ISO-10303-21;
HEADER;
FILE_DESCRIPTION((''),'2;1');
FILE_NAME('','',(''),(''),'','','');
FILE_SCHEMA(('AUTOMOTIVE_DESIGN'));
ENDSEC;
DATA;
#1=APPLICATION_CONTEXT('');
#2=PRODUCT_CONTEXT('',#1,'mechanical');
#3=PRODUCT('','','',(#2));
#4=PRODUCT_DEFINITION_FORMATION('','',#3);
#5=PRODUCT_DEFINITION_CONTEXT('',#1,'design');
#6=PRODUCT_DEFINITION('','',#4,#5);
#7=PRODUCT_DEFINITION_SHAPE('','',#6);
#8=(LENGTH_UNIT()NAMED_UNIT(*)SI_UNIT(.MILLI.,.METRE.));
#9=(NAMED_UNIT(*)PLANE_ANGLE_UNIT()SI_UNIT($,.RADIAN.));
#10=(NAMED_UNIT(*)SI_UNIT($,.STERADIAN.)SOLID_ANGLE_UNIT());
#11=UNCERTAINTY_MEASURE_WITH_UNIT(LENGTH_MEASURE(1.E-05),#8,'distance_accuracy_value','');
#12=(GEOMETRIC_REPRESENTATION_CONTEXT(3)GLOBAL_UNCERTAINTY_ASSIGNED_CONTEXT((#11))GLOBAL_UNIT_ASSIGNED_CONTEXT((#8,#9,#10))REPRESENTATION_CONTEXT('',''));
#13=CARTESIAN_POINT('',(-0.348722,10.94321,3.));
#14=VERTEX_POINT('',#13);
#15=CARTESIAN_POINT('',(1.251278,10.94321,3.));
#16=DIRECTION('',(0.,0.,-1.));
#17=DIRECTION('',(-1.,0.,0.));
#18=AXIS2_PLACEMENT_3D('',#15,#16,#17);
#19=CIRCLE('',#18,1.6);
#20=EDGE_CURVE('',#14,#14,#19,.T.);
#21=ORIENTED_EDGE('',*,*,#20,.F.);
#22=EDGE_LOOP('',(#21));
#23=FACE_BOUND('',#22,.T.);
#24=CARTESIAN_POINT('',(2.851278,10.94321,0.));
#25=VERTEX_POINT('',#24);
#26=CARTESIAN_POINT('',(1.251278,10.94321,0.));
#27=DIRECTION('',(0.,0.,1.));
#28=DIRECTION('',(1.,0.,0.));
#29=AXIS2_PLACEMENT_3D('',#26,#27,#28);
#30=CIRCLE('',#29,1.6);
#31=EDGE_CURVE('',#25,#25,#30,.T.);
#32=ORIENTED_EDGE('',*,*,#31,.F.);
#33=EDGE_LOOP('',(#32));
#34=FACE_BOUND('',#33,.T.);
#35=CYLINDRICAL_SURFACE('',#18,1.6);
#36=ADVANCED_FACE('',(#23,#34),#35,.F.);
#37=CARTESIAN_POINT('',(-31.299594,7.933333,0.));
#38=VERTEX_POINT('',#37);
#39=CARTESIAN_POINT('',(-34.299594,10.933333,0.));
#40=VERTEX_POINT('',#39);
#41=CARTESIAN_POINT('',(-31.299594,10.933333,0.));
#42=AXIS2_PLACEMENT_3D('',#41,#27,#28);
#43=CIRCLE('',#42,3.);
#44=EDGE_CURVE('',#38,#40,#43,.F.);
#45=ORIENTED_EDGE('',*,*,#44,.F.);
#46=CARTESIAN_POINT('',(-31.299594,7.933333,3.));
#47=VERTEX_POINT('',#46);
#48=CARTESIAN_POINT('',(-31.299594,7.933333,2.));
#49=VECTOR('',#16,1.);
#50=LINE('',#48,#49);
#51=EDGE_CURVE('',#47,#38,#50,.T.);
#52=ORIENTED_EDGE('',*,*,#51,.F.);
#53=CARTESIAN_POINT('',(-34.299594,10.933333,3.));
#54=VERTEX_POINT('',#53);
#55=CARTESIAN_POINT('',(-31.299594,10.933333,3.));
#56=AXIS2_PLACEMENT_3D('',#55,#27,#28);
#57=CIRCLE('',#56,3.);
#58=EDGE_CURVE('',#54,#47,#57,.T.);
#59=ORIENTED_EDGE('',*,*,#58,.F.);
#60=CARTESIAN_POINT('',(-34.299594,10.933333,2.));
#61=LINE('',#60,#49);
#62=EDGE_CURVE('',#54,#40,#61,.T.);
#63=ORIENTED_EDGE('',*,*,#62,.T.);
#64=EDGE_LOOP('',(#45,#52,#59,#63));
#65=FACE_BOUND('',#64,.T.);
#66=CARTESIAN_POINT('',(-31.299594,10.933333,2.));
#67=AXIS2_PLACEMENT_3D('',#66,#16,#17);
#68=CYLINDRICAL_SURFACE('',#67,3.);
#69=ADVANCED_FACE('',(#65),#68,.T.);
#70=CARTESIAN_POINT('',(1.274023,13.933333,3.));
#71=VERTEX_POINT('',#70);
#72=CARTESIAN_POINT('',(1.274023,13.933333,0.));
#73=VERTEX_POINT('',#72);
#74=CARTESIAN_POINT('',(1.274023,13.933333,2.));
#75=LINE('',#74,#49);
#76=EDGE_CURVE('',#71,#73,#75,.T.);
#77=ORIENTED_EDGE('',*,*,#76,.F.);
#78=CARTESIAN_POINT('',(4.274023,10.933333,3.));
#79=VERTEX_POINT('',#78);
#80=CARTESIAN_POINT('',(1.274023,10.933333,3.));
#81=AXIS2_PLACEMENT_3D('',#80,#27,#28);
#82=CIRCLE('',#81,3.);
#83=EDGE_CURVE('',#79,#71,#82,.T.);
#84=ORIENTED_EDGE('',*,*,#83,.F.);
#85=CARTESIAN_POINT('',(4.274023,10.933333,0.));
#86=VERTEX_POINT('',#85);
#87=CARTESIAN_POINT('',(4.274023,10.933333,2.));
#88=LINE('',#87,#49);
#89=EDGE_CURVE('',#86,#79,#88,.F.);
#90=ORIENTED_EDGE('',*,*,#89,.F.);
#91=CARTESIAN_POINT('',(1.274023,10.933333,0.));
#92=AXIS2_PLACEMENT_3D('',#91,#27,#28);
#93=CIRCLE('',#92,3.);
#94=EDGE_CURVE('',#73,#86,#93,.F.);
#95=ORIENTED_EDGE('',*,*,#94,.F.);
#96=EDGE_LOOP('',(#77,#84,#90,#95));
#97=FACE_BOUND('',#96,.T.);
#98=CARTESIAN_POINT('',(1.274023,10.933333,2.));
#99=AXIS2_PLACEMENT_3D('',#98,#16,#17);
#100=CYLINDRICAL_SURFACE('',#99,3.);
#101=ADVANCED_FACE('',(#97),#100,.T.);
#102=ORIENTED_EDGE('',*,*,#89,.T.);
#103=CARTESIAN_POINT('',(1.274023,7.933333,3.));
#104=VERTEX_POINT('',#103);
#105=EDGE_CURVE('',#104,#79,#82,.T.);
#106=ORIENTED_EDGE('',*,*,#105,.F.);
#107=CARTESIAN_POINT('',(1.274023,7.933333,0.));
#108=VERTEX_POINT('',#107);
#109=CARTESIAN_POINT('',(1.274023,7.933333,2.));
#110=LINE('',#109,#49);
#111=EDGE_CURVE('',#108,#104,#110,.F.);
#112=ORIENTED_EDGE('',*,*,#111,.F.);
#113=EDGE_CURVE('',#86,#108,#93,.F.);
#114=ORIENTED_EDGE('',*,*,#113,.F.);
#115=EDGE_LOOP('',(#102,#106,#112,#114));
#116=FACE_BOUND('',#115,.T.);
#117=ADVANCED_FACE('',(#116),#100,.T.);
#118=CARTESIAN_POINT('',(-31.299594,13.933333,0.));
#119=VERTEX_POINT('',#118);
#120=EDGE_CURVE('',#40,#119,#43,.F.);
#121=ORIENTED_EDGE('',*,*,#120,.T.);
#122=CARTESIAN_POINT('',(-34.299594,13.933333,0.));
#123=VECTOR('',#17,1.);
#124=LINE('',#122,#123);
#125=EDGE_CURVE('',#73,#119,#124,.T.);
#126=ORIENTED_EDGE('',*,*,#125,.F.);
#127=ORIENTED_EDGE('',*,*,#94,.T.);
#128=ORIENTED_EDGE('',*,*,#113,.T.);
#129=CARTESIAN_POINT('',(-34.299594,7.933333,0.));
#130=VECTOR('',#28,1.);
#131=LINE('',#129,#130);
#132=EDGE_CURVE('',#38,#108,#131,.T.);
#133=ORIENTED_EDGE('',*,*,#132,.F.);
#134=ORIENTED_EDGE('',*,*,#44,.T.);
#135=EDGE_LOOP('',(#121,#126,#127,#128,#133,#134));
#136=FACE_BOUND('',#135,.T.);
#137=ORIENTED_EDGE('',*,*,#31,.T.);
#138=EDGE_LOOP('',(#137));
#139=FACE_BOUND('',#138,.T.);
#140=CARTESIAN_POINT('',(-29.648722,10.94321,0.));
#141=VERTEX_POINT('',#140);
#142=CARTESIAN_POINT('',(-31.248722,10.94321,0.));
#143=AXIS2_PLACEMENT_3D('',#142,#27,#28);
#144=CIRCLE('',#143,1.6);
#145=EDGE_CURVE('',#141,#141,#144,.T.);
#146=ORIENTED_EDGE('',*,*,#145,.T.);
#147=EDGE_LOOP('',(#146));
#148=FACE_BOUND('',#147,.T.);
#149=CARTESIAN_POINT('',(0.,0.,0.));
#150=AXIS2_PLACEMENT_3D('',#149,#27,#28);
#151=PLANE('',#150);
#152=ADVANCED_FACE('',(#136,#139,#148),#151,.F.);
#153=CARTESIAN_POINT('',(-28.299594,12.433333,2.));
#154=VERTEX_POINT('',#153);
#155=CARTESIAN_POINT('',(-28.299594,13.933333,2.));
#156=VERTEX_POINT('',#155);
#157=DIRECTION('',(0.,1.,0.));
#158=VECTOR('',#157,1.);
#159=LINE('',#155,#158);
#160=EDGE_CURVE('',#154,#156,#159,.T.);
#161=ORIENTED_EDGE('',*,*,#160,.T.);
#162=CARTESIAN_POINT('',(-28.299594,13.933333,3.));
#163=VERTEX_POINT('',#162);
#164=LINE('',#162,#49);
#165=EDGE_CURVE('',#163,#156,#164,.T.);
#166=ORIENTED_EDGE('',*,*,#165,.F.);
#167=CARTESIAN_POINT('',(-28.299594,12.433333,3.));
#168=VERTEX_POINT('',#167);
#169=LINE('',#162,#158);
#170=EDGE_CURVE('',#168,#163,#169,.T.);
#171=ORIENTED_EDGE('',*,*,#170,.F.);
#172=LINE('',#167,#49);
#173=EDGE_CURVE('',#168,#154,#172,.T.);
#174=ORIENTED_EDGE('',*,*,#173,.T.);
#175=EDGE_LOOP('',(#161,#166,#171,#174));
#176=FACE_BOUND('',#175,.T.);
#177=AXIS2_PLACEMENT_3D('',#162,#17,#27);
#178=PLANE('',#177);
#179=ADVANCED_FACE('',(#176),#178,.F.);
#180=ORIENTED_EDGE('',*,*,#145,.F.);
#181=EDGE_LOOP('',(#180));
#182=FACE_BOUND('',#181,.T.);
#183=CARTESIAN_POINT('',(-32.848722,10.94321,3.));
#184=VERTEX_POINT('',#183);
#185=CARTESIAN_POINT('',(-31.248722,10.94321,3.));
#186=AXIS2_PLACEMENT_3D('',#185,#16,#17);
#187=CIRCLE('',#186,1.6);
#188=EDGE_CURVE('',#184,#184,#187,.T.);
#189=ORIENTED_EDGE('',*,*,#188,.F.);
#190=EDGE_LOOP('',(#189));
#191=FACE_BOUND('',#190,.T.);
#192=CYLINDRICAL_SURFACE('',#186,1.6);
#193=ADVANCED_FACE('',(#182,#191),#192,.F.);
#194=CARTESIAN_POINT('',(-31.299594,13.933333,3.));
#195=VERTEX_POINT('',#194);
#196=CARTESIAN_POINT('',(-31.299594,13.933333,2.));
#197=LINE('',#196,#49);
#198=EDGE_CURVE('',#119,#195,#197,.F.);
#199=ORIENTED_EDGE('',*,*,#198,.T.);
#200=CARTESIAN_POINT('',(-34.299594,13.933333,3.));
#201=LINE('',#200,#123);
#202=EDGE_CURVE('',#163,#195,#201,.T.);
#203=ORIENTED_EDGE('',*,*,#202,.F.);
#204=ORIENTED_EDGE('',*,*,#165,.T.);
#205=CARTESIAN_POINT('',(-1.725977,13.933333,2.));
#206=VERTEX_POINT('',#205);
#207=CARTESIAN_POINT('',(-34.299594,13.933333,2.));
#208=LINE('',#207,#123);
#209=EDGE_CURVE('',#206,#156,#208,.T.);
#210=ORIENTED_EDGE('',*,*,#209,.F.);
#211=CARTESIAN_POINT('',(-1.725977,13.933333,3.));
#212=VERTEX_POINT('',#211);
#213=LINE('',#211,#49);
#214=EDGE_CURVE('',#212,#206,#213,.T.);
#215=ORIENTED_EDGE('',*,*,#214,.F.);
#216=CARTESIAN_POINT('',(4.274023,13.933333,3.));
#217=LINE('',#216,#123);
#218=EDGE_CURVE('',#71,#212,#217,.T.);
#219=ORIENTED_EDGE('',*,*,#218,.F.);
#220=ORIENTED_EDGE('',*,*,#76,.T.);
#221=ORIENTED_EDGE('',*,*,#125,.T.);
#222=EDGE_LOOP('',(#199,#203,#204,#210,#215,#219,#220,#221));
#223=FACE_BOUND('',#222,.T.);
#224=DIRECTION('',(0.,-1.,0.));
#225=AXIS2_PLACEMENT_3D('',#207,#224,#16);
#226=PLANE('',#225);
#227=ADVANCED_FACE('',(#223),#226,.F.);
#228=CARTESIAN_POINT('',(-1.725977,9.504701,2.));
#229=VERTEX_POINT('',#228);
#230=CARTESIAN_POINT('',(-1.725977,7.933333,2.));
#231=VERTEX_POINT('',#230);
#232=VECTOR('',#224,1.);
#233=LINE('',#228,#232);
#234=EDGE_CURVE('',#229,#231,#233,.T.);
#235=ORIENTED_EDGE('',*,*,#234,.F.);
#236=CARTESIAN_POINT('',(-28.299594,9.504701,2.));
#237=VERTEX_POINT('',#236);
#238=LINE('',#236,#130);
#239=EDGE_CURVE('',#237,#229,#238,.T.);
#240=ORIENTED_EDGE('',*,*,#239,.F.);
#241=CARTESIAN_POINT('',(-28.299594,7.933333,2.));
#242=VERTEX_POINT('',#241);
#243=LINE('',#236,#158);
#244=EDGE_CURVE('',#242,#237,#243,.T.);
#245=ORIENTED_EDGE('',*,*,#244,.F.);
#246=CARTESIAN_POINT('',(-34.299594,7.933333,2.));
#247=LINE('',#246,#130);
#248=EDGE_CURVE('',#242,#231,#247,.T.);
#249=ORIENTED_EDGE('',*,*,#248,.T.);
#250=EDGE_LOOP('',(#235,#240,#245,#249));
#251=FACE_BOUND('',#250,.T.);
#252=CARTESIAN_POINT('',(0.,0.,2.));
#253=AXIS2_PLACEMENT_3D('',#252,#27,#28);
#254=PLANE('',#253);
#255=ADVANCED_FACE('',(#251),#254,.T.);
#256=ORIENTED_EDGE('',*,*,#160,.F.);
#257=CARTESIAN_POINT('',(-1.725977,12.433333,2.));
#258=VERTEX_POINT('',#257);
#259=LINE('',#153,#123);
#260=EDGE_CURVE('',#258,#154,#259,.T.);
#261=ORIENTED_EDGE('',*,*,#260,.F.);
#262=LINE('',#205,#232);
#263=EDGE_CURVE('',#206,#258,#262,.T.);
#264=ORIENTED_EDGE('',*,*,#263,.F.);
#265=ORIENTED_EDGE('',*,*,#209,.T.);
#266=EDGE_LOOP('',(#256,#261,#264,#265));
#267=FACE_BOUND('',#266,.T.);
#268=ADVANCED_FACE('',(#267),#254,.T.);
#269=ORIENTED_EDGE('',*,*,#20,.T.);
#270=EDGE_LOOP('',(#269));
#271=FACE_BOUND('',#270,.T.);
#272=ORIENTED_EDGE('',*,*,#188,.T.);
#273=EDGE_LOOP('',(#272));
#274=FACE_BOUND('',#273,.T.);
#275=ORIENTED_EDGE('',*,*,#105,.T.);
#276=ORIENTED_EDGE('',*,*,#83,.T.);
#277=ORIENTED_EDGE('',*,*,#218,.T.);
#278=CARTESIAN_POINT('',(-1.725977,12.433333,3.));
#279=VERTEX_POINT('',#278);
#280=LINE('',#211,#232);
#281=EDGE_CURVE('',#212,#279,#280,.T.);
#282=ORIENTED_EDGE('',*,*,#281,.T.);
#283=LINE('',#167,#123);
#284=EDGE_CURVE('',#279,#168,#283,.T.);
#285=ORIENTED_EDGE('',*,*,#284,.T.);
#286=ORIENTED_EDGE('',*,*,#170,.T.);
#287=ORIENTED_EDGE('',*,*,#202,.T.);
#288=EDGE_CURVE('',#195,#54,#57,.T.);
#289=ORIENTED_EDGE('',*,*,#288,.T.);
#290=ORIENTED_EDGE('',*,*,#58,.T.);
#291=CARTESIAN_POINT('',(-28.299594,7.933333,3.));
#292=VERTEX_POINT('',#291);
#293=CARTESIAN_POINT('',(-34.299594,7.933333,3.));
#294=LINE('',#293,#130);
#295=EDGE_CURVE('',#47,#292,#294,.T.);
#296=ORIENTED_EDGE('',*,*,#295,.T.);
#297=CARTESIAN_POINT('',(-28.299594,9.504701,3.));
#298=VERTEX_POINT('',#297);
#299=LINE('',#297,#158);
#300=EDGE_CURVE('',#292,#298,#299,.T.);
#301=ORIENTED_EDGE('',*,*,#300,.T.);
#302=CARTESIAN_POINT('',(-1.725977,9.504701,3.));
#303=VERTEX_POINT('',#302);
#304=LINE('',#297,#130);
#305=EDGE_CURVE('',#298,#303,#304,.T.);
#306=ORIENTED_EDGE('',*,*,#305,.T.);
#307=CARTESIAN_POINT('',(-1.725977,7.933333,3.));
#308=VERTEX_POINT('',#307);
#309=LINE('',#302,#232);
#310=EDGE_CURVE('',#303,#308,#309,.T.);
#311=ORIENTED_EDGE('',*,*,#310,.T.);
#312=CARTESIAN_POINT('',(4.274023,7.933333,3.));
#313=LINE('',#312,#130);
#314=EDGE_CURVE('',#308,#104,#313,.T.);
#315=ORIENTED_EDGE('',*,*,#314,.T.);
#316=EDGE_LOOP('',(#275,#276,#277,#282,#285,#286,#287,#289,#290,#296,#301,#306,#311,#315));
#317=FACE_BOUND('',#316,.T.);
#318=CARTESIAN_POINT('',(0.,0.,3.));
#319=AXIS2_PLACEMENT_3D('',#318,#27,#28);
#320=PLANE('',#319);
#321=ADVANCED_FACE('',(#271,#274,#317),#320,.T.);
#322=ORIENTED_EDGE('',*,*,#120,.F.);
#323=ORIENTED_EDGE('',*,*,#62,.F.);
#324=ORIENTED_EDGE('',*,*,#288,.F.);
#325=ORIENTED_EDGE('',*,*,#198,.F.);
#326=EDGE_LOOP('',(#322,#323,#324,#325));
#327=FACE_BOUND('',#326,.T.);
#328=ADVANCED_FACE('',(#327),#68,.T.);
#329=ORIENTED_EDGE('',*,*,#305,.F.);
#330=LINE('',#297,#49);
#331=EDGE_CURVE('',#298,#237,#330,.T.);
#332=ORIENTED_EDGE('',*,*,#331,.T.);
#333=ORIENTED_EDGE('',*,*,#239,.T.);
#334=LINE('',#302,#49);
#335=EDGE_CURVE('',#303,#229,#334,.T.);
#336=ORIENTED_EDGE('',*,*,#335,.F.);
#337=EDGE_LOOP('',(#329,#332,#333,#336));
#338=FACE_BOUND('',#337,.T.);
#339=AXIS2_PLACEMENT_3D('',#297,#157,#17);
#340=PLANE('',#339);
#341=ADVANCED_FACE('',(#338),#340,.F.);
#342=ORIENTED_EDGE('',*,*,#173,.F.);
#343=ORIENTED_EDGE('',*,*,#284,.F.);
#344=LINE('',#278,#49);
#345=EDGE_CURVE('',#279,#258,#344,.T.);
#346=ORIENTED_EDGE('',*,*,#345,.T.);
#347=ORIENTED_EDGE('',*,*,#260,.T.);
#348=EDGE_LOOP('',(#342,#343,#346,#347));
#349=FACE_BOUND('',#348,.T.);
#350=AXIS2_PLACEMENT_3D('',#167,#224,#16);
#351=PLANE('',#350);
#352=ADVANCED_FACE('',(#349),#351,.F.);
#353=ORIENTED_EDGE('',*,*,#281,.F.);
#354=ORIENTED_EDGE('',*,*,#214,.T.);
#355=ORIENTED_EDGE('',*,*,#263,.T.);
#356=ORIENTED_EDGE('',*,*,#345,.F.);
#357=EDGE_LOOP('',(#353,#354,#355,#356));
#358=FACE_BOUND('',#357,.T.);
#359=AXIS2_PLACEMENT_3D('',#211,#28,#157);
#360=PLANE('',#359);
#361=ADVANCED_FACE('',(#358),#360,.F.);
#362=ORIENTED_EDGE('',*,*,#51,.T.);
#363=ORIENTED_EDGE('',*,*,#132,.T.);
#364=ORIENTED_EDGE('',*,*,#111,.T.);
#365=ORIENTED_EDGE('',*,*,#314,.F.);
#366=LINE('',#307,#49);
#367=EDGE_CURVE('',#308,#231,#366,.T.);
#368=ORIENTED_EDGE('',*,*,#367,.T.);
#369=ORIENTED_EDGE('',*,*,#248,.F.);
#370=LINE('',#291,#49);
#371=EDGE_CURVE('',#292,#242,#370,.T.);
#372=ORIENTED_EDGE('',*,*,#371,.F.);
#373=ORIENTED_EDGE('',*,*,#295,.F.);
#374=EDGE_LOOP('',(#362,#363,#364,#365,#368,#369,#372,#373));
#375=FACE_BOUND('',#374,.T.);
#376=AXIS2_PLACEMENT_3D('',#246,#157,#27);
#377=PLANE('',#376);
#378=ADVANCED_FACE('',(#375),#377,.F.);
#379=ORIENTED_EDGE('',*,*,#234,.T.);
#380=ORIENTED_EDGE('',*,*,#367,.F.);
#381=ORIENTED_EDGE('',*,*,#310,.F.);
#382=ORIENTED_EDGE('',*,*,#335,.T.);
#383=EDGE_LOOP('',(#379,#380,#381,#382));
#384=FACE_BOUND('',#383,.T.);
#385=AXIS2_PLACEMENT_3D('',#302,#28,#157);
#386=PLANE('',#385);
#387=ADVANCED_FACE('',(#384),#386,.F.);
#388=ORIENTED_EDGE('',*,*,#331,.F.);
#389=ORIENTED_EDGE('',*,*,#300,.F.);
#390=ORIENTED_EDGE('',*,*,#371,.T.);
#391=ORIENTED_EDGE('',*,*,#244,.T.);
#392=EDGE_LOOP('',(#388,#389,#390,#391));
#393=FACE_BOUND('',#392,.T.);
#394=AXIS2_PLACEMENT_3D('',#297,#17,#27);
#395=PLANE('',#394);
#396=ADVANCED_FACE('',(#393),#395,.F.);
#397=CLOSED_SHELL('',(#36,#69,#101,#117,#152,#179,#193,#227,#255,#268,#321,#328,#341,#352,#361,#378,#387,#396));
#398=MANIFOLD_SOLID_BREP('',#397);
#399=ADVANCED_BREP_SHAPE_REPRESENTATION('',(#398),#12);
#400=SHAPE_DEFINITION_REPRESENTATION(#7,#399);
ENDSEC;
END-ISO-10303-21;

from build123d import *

# Parameters (mm, degrees)
SZKIC1_W                        = 38.573617051
SZKIC1_H                        = 6
DODANIE_WYCI_GNI_CIE1_DEPTH     = 2
WYTNIJ_WYCI_GNI_CIE2_DEPTH      = 1
WYTNIJ_WYCI_GNI_CIE2_DEPTH_BACK = 38.075597401
SZKIC3_R                        = 1.6
DODANIE_WYCI_GNI_CIE2_DEPTH     = 1
SZKIC5_R                        = 1.6
WYTNIJ_WYCI_GNI_CIE3_DEPTH      = 38.142965991
ZAOKR_GLENIE1_R                 = 3


with BuildPart() as part:
    # Szkic1 → Dodanie-wyciągnięcie1 (new body)
    with BuildSketch(Plane.XY):
        with Locations((-15.012785421, 10.933333333)):
            Rectangle(SZKIC1_W, SZKIC1_H)
    extrude(amount=DODANIE_WYCI_GNI_CIE1_DEPTH)

    # Szkic3 → Wytnij-wyciągnięcie2 (cut, two sides: drawn at the far end of the back side and taken through both)
    with BuildSketch(Plane.XY.offset(2).offset(-WYTNIJ_WYCI_GNI_CIE2_DEPTH_BACK)):
        with Locations((-31.24872203, 10.943210033)):
            Circle(SZKIC3_R)
        with Locations((1.25127797, 10.943210033)):
            Circle(SZKIC3_R)
    extrude(amount=WYTNIJ_WYCI_GNI_CIE2_DEPTH + WYTNIJ_WYCI_GNI_CIE2_DEPTH_BACK, mode=Mode.SUBTRACT)

    # Szkic4 → Dodanie-wyciągnięcie2 (add)
    with BuildSketch(Plane.XY.offset(2)):
        Polygon((-34.299593946, 13.933333333), (-28.299593946, 13.933333333), (-28.299593946, 12.433333333), (-1.725976895, 12.433333333), (-1.725976895, 13.933333333), (4.274023105, 13.933333333), (4.274023105, 7.933333333), (-1.725976895, 7.933333333), (-1.725976895, 9.504700568), (-28.299593946, 9.504700568), (-28.299593946, 7.933333333), (-34.299593946, 7.933333333), align=None)
    extrude(amount=DODANIE_WYCI_GNI_CIE2_DEPTH)

    # Szkic5 → Wytnij-wyciągnięcie3 (cut, through all)
    with BuildSketch(Plane(origin=(0, 0, 0), x_dir=(-1, 0, 0), z_dir=(0, 0, -1))):
        with Locations((-1.25127797, 10.943210033)):
            Circle(SZKIC5_R)
        with Locations((31.24872203, 10.943210033)):
            Circle(SZKIC5_R)
    extrude(amount=-WYTNIJ_WYCI_GNI_CIE3_DEPTH, mode=Mode.SUBTRACT)

    # Zaokrąglenie1
    zaokr_glenie1_edges = [part.edges().sort_by_distance(p)[0] for p in [
        (-34.299593946, 7.933333333, 1.5),
        (-34.299593946, 13.933333333, 1.5),
        (4.274023105, 7.933333333, 1.5),
        (4.274023105, 13.933333333, 1.5),
    ]]
    fillet(zaokr_glenie1_edges, radius=ZAOKR_GLENIE1_R - 0.0001)  # a hair under: the kernel refuses the full size


solid = part.part
